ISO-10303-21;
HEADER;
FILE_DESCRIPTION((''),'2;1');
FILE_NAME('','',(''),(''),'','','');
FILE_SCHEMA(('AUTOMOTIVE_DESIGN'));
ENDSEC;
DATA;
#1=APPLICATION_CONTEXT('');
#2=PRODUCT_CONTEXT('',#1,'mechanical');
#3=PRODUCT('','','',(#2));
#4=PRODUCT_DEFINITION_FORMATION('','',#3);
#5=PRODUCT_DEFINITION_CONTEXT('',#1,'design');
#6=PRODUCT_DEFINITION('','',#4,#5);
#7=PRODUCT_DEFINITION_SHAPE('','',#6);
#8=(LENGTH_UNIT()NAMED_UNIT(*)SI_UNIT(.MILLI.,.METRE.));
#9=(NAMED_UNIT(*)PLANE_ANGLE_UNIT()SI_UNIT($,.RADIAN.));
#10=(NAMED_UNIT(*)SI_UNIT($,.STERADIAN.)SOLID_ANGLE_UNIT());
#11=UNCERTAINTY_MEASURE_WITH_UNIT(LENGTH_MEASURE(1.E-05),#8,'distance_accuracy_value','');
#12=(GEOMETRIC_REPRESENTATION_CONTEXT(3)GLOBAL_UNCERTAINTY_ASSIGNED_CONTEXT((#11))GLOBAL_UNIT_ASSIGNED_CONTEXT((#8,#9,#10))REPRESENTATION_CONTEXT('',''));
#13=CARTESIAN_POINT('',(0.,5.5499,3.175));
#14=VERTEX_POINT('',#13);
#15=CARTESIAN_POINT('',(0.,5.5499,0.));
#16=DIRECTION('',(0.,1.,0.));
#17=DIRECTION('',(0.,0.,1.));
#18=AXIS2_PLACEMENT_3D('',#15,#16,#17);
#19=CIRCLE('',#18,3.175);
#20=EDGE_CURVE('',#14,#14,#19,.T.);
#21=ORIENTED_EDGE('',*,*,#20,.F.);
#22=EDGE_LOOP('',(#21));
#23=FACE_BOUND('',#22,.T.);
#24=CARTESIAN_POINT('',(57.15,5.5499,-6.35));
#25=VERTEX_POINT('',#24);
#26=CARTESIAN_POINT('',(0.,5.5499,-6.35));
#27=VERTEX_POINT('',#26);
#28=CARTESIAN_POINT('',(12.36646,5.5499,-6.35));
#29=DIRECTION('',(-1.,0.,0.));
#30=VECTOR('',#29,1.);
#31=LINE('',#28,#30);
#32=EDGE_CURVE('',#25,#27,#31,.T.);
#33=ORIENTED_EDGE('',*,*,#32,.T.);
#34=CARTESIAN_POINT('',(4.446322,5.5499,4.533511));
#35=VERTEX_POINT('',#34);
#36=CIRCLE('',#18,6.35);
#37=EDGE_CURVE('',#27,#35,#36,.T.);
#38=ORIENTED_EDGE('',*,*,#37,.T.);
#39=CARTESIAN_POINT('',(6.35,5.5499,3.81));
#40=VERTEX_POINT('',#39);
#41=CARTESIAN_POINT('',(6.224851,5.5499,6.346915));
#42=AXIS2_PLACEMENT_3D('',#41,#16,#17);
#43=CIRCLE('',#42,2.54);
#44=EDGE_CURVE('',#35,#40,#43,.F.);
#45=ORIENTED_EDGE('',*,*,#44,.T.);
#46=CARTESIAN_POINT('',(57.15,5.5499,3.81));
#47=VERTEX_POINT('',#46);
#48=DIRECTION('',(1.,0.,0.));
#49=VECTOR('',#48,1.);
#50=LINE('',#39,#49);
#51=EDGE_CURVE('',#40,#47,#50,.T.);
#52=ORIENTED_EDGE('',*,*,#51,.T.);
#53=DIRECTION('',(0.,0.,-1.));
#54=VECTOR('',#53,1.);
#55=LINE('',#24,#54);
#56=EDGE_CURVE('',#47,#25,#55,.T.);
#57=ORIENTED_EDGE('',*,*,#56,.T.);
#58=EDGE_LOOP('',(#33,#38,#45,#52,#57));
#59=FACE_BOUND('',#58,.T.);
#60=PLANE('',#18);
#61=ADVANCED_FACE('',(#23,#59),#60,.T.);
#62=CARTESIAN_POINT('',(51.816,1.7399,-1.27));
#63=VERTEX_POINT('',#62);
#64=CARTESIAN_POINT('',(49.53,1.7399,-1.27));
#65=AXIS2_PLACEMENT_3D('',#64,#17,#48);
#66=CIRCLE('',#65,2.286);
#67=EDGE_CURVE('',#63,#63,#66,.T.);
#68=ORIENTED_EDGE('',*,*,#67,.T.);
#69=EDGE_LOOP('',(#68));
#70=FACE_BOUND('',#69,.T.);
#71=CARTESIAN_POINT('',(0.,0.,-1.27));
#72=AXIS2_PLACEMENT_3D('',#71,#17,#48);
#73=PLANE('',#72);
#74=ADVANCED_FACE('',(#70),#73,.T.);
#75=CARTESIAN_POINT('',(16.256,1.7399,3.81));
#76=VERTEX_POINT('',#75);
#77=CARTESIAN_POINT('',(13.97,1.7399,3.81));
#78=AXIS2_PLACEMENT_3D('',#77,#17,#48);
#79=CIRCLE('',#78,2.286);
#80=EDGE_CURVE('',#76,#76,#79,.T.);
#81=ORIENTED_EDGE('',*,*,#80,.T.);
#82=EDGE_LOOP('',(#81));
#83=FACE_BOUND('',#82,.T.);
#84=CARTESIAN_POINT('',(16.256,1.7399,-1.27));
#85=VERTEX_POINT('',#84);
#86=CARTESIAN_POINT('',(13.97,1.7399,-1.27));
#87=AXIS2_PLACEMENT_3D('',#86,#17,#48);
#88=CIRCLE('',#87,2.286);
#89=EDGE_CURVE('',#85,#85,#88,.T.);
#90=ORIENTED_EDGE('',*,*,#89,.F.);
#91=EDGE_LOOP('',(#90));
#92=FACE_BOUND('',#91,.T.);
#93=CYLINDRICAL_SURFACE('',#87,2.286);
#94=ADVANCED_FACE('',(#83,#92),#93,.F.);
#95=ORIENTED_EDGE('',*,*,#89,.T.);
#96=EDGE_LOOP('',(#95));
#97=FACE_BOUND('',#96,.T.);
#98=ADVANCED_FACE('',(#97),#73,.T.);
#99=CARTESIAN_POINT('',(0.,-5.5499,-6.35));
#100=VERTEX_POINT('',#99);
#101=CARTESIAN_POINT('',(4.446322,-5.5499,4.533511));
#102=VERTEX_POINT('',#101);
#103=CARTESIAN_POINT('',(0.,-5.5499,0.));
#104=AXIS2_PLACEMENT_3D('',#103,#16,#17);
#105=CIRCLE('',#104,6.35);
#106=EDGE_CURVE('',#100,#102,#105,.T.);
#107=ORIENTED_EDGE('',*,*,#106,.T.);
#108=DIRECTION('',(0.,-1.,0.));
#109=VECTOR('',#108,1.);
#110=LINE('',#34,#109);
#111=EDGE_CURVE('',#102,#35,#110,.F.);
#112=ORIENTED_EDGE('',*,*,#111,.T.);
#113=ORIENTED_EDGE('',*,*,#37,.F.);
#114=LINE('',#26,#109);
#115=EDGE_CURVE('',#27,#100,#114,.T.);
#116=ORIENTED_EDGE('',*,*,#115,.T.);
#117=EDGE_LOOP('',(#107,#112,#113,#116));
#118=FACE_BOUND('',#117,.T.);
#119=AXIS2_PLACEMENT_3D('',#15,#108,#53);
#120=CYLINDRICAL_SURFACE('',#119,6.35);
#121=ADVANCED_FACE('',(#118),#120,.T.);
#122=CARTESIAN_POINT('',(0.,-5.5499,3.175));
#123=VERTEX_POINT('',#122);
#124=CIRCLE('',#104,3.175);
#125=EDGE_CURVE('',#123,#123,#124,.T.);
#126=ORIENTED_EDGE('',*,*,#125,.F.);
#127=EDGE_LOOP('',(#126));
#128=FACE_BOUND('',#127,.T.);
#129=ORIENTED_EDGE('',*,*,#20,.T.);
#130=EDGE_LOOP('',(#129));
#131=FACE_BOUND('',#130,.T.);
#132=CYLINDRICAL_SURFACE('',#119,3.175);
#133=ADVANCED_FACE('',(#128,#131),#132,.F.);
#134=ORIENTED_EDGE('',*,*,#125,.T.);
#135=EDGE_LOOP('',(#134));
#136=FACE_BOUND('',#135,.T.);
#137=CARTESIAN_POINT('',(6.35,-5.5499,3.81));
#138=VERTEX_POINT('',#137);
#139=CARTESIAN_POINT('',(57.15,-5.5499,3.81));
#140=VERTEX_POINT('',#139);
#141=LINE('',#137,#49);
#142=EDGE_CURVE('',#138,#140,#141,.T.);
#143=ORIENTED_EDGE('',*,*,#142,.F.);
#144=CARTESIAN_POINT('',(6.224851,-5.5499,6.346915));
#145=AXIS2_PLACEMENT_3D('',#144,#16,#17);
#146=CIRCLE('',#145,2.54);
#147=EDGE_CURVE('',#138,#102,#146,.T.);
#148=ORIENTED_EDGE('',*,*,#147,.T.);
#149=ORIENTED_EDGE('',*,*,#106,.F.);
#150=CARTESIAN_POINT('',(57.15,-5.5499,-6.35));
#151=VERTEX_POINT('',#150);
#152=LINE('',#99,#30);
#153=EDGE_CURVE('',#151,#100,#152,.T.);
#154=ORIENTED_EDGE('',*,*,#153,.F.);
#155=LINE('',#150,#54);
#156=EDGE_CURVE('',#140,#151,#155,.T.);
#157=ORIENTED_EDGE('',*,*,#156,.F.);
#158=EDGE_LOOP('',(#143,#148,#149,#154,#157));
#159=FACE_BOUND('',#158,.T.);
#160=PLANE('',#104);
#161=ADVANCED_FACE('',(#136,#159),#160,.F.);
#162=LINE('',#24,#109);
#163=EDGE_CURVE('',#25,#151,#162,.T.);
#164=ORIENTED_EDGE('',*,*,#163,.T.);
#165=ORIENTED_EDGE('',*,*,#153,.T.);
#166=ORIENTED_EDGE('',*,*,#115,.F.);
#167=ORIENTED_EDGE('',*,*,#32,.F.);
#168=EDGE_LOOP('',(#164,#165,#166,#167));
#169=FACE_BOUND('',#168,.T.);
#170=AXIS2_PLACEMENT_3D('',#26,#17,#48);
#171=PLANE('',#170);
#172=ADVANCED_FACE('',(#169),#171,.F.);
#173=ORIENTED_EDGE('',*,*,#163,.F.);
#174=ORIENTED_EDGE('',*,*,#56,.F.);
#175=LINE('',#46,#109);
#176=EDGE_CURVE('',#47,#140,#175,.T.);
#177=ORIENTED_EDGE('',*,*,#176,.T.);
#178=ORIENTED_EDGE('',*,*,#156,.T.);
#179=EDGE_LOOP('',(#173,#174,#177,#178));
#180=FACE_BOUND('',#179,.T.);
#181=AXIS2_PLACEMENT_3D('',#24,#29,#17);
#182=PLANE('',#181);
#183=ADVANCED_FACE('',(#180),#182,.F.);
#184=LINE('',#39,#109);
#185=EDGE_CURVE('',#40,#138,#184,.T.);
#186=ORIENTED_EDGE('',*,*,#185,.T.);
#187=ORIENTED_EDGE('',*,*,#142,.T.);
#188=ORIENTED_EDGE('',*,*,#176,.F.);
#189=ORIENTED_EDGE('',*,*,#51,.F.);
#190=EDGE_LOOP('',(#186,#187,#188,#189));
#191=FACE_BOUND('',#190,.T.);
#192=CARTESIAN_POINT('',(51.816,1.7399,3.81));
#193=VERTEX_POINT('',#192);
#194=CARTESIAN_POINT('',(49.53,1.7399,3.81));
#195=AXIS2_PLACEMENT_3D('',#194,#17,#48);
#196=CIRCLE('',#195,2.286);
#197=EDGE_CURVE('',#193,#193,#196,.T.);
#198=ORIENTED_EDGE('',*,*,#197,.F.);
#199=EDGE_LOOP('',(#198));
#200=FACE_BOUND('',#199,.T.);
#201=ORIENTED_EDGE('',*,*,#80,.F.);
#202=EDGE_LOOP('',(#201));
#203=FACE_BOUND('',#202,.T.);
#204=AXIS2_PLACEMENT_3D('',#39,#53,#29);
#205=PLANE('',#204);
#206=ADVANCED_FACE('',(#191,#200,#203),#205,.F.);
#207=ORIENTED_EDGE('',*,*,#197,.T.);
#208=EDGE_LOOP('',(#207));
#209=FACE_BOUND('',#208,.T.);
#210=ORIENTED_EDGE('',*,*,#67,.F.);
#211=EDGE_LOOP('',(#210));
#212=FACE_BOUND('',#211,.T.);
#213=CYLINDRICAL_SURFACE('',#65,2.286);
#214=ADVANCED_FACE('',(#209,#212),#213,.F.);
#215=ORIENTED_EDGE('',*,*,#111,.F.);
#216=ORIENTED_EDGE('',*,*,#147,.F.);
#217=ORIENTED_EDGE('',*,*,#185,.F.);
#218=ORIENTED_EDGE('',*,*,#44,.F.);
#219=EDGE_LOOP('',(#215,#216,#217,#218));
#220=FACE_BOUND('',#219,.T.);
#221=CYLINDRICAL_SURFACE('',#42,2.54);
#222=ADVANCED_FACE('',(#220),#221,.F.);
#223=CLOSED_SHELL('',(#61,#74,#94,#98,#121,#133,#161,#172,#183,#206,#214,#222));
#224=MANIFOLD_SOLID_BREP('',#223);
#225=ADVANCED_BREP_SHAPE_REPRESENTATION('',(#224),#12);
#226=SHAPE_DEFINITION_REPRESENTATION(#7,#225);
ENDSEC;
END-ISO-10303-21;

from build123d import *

# Parameters (mm, degrees)
SKETCH1_R           = 3.175
BOSS_EXTRUDE1_DEPTH = 5.5499
FILLET1_START       = -5.5499
FILLET1_DEPTH       = 11.0998
SKETCH2_R           = 2.286
SKETCH2_R_2         = 1.89865
CUT_EXTRUDE1_DEPTH  = 5.08


with BuildPart() as part:
    # Sketch1 → Boss-Extrude1 (new, symmetric)
    with BuildSketch(Plane(origin=(0, 0, 0), x_dir=(1, 0, 0), z_dir=(0, 1, 0))):
        with BuildLine():
            Line((0, 6.35), (12.366459894, 6.35))
            Line((12.366459894, 6.35), (57.15, 6.35))
            Line((57.15, 6.35), (57.15, -3.81))
            Line((57.15, -3.81), (6.35, -3.81))
            Line((6.35, -3.81), (6.35, 0))
            ThreePointArc((6.35, 0), (-4.490128061, -4.490128061), (0, 6.35))
        make_face()
        with Locations(Location((0, 0, 0), (0, 0, 270))):
            Circle(SKETCH1_R, mode=Mode.SUBTRACT)
    extrude(amount=BOSS_EXTRUDE1_DEPTH, both=True)

    # Fillet1: read off the stored shape, not the designer's step
    # Fillet1 outline → Fillet1 (add)
    with BuildSketch(Plane(origin=(0, 0, 0), x_dir=(1, 0, 0), z_dir=(0, 1, 0)).offset(FILLET1_START)):
        with BuildLine():
            ThreePointArc((4.446322142, -4.533510716), (5.322474594, -3.972611562), (6.35, -3.81))
            Line((6.35, -3.81), (6.35, 0))
            ThreePointArc((6.35, 0), (5.854769236, -2.458490838), (4.446322142, -4.533510716))
        make_face()
    extrude(amount=FILLET1_DEPTH)

    # Sketch2 → Cut-Extrude1 (cut)
    with BuildSketch(Plane.XY.offset(3.81)):
        with Locations((13.97, 1.7399)):
            Circle(SKETCH2_R)
        with Locations((49.53, 1.7399)):
            Circle(SKETCH2_R)
        with Locations((13.97, 1.7399)):
            Circle(SKETCH2_R_2)
        with Locations((49.53, 1.7399)):
            Circle(SKETCH2_R_2)
    extrude(amount=-CUT_EXTRUDE1_DEPTH, mode=Mode.SUBTRACT)


solid = part.part
